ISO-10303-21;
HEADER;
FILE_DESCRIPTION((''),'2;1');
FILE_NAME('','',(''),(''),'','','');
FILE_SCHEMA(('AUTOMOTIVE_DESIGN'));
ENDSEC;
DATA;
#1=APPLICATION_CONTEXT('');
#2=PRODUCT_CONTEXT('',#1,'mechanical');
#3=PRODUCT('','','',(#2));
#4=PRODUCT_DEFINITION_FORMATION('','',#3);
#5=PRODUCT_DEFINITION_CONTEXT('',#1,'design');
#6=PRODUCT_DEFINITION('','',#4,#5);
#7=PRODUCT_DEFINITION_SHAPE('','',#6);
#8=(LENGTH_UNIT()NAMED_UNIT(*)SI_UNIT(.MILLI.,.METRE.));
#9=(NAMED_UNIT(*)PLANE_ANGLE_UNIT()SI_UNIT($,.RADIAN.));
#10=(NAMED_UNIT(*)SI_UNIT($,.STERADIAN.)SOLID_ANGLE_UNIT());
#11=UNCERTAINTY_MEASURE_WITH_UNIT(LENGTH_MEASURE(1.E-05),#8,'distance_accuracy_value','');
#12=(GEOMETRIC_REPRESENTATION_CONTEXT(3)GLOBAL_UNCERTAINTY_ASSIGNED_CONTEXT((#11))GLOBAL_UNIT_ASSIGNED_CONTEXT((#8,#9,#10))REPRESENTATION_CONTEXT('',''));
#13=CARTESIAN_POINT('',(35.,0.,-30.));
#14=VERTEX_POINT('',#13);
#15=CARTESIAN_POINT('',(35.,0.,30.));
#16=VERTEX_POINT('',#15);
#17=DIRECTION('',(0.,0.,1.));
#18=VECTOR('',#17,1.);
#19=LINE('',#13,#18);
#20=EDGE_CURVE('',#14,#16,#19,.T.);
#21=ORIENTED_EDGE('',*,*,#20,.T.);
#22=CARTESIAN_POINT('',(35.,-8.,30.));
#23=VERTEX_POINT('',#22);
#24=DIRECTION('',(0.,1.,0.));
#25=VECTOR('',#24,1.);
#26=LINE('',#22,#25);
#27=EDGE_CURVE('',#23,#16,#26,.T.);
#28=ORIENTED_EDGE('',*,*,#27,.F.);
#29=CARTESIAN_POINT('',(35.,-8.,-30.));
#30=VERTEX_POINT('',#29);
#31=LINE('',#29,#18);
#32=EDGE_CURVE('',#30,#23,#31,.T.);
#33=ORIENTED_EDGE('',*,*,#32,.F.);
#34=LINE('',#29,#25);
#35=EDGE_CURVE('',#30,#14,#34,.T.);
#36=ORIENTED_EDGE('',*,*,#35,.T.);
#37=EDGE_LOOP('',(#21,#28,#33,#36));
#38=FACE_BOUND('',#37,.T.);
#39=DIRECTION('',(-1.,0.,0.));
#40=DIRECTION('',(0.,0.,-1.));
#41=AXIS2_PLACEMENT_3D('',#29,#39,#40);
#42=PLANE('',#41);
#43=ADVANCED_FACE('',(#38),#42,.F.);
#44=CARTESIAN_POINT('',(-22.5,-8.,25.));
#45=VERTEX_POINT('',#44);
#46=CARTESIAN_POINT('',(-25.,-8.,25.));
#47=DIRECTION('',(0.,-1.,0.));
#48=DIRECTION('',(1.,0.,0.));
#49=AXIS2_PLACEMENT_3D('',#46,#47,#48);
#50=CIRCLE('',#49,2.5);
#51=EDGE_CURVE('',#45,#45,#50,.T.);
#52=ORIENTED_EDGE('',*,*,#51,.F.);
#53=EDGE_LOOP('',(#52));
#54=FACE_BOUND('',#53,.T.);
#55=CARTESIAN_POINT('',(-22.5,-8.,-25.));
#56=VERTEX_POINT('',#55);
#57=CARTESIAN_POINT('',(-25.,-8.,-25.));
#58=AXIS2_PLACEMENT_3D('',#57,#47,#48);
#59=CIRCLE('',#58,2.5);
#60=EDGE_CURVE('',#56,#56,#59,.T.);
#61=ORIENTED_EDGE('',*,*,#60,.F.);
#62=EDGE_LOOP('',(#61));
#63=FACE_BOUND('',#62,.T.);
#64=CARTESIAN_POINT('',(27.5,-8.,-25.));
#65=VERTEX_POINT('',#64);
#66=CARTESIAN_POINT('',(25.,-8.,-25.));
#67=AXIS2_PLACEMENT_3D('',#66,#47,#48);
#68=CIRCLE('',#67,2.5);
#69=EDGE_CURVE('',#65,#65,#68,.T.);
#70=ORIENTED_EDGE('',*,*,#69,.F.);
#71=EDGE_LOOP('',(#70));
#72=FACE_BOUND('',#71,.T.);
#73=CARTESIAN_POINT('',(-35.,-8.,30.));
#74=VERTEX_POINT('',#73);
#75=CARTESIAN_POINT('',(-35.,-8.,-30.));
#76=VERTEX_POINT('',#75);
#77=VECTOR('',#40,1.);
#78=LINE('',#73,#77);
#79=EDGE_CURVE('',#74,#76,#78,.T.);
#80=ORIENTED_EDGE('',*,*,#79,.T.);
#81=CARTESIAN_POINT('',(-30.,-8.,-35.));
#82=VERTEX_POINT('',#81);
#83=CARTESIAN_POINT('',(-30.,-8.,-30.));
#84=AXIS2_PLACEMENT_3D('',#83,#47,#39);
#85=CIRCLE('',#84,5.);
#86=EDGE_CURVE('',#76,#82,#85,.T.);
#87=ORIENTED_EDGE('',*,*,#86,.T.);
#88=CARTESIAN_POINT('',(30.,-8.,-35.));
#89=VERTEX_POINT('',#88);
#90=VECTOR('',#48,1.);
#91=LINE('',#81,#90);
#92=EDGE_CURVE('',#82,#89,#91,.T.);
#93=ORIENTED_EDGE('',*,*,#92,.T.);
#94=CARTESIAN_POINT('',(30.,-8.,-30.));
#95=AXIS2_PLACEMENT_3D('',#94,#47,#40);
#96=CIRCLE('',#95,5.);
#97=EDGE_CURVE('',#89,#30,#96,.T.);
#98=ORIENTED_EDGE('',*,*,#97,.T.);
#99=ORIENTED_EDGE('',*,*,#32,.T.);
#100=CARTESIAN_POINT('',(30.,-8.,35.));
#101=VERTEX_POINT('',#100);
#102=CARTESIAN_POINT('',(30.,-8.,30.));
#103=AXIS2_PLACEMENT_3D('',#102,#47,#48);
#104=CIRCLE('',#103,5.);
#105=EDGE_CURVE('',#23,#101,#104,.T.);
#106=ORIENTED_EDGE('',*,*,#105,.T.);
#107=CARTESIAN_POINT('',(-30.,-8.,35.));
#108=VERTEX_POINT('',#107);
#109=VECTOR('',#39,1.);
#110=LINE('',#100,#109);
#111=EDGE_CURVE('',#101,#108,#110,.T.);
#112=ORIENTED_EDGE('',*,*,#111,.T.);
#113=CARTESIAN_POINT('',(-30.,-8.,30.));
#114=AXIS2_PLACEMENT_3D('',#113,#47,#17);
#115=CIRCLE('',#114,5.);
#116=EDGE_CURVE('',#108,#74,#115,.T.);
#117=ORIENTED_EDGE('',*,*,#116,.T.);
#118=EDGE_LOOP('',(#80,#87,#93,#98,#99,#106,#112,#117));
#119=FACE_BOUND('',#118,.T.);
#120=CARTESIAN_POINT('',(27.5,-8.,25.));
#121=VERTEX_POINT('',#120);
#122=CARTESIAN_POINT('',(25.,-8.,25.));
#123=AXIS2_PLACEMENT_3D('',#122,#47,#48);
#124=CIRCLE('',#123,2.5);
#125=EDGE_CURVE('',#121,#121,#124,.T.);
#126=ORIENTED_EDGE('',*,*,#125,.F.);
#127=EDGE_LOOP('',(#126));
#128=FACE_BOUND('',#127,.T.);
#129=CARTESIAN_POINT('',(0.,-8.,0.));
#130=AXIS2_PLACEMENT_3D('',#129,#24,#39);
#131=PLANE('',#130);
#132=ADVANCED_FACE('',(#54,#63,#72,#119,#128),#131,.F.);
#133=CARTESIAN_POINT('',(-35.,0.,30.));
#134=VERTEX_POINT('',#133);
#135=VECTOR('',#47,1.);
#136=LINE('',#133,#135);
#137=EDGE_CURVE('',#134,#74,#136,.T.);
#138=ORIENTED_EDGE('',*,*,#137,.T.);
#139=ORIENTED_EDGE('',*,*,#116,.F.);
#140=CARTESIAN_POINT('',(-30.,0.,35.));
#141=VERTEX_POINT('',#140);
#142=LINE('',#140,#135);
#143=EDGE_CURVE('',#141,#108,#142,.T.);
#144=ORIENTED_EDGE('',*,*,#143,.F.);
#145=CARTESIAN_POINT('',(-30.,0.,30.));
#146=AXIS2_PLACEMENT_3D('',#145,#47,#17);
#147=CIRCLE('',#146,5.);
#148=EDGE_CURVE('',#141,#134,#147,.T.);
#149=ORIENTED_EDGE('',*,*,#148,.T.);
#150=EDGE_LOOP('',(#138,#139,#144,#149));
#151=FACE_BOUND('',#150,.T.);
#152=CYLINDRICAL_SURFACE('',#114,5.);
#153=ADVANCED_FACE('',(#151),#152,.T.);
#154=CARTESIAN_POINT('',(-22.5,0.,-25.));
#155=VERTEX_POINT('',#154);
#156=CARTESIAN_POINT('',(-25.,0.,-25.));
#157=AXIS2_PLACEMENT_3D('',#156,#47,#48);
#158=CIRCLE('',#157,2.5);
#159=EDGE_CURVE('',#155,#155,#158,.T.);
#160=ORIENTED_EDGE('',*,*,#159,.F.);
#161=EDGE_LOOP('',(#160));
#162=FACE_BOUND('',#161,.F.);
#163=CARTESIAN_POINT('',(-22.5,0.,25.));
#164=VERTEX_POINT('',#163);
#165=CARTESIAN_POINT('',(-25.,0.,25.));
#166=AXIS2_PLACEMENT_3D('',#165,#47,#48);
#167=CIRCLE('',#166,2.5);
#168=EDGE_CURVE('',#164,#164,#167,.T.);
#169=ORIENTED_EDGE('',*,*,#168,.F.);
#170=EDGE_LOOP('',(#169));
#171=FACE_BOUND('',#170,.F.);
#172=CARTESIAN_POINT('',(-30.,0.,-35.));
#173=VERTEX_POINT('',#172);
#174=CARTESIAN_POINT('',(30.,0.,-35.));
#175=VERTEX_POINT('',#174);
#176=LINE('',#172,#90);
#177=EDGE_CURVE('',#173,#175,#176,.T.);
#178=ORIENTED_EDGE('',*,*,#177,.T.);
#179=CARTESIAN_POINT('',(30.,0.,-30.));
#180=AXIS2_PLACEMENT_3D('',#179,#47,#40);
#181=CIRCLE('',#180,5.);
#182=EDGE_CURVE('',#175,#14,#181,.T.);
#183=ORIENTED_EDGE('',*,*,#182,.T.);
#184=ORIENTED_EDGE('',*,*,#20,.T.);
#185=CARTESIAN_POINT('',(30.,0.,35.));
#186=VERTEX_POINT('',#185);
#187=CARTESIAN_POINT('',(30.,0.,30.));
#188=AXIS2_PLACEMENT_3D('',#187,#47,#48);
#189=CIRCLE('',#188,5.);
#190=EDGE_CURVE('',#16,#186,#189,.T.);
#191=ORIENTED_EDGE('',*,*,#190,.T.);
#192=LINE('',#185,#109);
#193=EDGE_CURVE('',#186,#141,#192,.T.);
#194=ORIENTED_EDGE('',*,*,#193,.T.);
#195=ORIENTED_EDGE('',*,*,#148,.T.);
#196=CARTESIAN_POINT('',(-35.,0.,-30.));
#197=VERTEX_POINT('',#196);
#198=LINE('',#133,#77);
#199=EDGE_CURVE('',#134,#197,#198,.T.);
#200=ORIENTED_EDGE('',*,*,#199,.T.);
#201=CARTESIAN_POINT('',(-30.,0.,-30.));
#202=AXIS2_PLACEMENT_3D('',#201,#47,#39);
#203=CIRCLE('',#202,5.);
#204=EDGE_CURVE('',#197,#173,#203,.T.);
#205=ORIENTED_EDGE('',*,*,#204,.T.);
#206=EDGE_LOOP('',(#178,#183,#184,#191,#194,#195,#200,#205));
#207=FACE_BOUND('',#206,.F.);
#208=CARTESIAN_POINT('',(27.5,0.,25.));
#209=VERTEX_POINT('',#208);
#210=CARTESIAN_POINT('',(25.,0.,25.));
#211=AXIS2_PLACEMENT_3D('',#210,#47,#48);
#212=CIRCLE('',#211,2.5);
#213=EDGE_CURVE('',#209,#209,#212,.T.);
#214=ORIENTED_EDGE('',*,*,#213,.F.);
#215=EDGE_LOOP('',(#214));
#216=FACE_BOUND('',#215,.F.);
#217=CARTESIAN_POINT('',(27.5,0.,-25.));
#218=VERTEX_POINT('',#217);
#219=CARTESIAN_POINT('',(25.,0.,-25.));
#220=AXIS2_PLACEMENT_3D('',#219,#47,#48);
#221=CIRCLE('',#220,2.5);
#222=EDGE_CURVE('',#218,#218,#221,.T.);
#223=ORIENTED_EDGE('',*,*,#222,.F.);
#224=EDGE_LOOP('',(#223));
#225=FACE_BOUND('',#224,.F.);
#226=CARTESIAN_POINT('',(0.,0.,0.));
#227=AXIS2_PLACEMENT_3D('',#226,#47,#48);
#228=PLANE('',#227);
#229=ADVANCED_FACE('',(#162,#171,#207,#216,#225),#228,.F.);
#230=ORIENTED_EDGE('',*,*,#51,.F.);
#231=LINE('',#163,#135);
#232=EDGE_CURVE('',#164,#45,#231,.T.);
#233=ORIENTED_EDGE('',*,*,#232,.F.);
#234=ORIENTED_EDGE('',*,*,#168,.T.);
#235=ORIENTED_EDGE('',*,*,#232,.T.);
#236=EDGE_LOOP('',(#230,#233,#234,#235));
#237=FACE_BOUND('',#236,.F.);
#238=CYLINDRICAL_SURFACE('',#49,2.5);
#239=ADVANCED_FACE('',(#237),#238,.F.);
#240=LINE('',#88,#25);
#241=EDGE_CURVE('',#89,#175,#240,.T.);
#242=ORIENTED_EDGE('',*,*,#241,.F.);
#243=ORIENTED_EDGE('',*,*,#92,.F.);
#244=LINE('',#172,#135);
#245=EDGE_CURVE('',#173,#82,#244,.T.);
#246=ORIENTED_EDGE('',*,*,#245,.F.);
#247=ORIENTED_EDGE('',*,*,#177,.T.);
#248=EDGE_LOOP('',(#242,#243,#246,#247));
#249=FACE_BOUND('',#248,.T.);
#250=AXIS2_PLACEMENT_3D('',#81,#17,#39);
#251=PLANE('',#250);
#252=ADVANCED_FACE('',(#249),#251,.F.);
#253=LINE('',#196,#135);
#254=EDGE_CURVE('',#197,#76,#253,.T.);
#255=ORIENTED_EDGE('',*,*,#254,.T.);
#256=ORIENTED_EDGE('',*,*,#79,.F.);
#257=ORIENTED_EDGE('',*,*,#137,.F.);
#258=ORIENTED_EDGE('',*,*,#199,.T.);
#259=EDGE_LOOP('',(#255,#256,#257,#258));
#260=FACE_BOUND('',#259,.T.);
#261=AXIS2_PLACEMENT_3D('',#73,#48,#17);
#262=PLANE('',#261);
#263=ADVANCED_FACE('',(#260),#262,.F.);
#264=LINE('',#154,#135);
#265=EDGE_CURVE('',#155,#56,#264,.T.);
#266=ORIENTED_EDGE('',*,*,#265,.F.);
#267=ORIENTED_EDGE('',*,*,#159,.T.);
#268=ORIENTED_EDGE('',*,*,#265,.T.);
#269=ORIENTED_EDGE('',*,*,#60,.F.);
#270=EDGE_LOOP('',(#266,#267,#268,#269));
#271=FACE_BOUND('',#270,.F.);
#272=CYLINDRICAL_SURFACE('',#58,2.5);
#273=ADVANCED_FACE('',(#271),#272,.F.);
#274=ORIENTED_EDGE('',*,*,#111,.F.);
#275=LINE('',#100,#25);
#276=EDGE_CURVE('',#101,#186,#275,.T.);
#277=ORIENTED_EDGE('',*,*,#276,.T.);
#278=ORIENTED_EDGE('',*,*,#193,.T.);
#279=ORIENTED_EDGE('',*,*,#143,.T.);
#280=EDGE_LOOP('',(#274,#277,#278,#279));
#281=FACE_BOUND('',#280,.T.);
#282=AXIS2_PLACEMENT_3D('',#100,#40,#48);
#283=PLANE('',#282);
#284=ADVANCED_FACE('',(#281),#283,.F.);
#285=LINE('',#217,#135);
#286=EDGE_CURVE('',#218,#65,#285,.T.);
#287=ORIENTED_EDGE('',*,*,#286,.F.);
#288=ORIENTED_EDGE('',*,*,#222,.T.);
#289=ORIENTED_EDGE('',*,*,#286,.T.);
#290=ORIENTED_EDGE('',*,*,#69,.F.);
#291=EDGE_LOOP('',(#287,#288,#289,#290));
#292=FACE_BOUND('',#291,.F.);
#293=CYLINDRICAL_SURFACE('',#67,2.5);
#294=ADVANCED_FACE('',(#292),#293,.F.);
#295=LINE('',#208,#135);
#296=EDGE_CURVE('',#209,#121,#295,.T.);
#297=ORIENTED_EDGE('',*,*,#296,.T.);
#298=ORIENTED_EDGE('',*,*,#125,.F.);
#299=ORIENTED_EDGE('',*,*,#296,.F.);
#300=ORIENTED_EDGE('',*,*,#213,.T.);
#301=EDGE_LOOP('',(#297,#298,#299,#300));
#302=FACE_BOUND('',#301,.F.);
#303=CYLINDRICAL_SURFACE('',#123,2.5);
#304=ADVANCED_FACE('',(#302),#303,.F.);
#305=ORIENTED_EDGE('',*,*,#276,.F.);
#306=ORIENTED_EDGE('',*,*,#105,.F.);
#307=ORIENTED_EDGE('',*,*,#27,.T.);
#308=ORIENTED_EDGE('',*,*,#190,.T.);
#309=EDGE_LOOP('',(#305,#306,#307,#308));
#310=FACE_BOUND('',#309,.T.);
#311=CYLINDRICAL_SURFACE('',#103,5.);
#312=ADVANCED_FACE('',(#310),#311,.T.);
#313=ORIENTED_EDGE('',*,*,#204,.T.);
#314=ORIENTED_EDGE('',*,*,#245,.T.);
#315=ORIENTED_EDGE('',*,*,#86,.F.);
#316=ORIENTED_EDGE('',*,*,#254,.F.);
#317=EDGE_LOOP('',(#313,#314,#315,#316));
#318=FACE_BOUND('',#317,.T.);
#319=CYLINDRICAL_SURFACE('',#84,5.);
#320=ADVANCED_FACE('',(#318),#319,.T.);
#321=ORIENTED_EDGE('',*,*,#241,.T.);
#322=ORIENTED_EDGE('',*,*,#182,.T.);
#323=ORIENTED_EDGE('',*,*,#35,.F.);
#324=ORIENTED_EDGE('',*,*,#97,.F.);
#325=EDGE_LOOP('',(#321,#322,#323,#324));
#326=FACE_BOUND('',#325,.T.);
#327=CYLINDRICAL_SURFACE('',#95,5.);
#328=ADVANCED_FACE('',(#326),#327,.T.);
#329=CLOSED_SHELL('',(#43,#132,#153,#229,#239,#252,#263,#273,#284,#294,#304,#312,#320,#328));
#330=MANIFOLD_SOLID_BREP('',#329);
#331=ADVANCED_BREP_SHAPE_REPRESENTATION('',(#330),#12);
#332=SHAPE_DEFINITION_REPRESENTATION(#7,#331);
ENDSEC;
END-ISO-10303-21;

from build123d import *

# Parameters (mm, degrees)
F0_R     = 2.5
F1_DEPTH = 4


# Not quite as in the source:
# - a pattern or mirror of a feature is missing from the dataset's text; its kind, count and spacing are read off the source's solid


with BuildPart() as f1:
    # F0 (on Front) → F1 (new body)
    with BuildSketch(Plane.XZ):
        with BuildLine():
            Line((30, 35), (-30, 35))
            ThreePointArc((-30, 35), (-33.5355339059, 33.5355339059), (-35, 30))
            Line((-35, 30), (-35, -30))
            ThreePointArc((-35, -30), (-33.5355339059, -33.5355339059), (-30, -35))
            Line((-30, -35), (30, -35))
            ThreePointArc((30, -35), (33.5355339059, -33.5355339059), (35, -30))
            Line((35, -30), (35, 30))
            ThreePointArc((35, 30), (33.5355339059, 33.5355339059), (30, 35))
        make_face()
        with Locations((-25, -25)):
            Circle(F0_R, mode=Mode.SUBTRACT)
        with Locations((25, -25)):
            Circle(F0_R, mode=Mode.SUBTRACT)
        with Locations((-25, 25)):
            Circle(F0_R, mode=Mode.SUBTRACT)
        with Locations((25, 25)):
            Circle(F0_R, mode=Mode.SUBTRACT)
    extrude(amount=F1_DEPTH)

    # F1_copies: F1 across plane


with BuildPart() as f1_1:
    add(f1.part)
    add(f1.part.mirror(Plane(origin=(0, -4, 0), x_dir=(0, 0, -1), z_dir=(0, -1, 0))))


solid = f1_1.part
